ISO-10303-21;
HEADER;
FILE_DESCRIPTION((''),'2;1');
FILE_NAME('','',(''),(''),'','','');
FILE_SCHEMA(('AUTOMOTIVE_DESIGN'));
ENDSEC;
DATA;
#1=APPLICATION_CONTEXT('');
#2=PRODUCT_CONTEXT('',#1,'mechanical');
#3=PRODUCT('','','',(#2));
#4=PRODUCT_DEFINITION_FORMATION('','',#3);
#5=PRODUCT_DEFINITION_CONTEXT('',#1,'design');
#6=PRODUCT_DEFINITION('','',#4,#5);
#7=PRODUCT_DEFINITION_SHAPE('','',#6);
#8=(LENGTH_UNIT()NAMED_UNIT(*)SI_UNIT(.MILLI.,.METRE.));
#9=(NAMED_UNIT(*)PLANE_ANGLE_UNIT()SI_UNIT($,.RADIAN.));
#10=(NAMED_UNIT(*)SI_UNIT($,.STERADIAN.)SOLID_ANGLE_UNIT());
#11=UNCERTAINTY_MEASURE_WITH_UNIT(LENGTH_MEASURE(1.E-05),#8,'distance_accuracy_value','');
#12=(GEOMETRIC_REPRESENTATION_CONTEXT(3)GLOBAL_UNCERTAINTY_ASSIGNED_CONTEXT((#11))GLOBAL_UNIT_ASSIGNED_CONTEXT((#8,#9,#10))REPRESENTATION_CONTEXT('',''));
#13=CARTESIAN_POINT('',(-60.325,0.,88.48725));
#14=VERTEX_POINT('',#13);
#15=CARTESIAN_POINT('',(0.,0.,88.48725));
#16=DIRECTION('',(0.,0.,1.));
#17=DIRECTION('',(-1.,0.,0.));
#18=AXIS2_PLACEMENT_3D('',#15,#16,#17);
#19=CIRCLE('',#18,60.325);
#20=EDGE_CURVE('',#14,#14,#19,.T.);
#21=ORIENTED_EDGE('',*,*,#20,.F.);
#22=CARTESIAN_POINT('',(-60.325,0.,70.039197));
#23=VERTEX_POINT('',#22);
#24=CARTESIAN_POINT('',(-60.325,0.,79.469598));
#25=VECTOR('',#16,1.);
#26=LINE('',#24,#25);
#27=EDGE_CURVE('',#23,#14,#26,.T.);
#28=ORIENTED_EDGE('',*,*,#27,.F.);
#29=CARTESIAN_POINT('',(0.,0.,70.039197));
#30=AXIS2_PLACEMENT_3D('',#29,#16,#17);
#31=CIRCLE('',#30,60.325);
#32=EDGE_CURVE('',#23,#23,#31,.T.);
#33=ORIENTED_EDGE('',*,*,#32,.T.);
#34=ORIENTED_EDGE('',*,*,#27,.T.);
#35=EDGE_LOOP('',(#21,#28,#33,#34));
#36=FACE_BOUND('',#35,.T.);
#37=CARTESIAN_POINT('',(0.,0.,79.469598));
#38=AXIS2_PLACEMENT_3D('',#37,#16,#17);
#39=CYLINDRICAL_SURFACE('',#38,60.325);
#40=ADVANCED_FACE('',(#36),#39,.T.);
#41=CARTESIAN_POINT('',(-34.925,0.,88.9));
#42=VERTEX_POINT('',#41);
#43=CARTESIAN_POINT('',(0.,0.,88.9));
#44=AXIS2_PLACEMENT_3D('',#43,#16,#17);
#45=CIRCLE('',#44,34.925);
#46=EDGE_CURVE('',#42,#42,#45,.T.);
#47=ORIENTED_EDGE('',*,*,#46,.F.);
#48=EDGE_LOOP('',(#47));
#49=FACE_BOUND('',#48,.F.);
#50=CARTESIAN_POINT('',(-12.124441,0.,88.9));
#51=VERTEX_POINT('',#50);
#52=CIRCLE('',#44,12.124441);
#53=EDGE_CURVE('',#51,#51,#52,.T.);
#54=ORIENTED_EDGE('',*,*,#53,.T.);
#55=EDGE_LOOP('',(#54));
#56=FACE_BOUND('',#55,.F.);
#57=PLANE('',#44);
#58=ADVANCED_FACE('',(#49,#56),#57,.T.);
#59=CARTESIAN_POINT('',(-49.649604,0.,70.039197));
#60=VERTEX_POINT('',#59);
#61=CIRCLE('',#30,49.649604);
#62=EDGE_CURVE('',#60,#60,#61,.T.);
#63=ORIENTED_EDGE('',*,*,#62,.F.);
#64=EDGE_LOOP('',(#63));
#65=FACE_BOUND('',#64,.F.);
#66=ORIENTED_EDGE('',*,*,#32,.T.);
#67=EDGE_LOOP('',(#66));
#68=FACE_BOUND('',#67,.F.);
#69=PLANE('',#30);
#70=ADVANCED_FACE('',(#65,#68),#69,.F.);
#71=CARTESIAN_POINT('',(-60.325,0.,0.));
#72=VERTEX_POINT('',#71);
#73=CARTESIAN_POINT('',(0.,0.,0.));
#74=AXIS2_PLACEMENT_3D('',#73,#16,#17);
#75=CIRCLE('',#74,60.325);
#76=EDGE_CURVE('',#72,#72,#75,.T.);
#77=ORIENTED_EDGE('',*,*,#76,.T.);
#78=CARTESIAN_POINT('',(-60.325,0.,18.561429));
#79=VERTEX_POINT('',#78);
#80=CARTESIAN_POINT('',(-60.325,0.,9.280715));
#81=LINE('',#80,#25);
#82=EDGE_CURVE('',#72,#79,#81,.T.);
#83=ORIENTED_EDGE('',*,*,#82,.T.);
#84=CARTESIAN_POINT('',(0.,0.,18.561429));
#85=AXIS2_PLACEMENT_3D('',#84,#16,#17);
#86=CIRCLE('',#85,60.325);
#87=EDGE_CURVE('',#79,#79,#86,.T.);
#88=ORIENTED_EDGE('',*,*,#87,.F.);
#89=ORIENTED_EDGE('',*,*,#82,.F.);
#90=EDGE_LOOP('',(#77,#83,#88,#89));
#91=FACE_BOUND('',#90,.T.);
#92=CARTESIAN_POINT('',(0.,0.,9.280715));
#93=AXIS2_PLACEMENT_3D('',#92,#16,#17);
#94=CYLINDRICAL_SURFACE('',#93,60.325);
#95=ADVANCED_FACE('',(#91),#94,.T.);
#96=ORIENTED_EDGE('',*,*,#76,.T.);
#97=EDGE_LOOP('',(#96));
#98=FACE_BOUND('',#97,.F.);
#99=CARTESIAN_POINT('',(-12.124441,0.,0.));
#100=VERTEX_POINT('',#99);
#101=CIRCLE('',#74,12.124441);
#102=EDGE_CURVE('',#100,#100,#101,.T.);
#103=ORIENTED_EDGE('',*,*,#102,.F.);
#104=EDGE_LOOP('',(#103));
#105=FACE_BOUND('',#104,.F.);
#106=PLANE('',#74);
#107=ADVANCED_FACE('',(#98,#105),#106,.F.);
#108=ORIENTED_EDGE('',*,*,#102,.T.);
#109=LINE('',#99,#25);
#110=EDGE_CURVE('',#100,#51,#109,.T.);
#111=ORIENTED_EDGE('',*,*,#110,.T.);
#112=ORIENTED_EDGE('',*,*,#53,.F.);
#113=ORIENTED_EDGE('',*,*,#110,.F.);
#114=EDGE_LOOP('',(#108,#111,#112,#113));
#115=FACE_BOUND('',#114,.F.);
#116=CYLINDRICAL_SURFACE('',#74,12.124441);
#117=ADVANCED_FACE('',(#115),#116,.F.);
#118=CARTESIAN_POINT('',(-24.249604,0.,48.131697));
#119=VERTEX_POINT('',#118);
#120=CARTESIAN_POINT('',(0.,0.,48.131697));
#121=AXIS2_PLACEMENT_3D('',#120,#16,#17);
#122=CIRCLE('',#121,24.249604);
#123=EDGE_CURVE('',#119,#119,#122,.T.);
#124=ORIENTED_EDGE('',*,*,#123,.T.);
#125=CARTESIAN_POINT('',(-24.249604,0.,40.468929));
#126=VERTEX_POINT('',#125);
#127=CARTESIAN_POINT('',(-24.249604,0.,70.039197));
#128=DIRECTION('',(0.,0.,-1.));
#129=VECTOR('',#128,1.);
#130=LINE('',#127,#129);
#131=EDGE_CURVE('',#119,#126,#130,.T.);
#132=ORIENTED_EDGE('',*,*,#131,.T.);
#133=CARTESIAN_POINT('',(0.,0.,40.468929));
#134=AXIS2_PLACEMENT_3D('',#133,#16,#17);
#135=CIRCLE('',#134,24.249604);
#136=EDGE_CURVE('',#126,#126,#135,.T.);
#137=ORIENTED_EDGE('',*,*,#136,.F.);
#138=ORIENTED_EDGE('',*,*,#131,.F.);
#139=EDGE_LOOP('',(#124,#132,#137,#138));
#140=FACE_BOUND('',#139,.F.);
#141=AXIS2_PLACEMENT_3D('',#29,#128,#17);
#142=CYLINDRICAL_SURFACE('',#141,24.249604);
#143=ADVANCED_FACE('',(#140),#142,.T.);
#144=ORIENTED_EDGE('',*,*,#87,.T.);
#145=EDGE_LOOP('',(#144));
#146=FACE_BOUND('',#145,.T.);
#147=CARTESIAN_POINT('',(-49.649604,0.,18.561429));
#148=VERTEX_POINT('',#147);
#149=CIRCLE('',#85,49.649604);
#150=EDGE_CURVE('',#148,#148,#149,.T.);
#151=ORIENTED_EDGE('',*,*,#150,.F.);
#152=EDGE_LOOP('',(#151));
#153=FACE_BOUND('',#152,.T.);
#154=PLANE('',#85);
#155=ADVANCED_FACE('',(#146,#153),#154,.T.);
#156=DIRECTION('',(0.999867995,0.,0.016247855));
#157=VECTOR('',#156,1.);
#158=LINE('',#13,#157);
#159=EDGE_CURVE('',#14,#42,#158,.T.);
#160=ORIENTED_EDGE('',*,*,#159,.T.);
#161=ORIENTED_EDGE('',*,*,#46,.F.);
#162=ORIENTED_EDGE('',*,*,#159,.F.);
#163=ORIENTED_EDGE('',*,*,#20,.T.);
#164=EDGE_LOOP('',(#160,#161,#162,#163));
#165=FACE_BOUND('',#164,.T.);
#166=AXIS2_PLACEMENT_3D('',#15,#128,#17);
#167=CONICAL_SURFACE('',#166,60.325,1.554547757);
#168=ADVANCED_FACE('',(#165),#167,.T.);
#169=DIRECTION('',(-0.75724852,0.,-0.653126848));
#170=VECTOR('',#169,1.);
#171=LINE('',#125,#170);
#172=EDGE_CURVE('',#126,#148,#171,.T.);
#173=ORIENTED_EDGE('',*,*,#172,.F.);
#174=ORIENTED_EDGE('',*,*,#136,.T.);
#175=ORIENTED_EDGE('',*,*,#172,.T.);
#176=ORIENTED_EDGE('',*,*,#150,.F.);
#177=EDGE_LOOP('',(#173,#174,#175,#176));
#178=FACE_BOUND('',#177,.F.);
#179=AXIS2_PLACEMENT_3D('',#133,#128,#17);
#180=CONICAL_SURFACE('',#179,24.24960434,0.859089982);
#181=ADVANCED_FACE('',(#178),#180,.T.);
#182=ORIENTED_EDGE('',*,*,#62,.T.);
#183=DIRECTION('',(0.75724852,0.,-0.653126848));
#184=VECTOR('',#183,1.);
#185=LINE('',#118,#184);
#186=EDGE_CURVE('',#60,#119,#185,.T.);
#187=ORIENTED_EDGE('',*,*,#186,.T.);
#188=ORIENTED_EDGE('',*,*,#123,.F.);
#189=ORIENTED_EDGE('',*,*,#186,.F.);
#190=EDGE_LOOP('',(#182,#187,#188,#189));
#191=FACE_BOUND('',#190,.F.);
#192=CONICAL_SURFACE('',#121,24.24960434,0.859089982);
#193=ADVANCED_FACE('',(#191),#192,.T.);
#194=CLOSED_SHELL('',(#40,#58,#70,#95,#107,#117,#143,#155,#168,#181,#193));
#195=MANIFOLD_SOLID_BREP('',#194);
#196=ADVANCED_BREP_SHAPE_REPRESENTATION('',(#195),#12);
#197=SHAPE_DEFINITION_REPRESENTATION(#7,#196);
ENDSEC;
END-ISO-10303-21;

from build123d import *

# Parameters (mm, degrees)
F0_W        = 36.0753956601
F0_H        = 18.8608030145
F0_W_2      = 12.1251638026
F0_H_2      = 51.4777676715
F0_H_3      = 18.561429314
F2_C1_SIZE2 = 21.9075
F2_C1_SIZE  = 25.4
F2_C2_SIZE2 = 25.4
F2_C2_SIZE  = 21.9075
F4_SIZE2    = 25.4
F4_SIZE     = 0.41275


# Not quite as in the source:
# - a feature of the source that left no trace in its solid (it failed there, or was rolled back) is left out


with BuildPart() as f1:
    # F0 (on Front) → F1 (revolve)
    with BuildSketch(Plane.XZ):
        with Locations((-42.2873021699, 79.4695984927)):
            Rectangle(F0_W, F0_H)
        with Locations((-18.1870224386, 79.4695984927)):
            Rectangle(F0_W_2, F0_H)
        with Locations((-18.1870224386, 44.3003131497)):
            Rectangle(F0_W_2, F0_H_2)
        with Locations((-18.1870224386, 9.280714657)):
            Rectangle(F0_W_2, F0_H_3)
        with Locations((-42.2873021699, 9.280714657)):
            Rectangle(F0_W, F0_H_3)
    revolve(axis=Axis((0, 0, 53.2892593555), (0, 0, 1)))

    # F2: chamfer of 21.9075 x 25.4 on 2 edges, made by hand

    # F2_c1
    f2_c1_edges = [f1.edges().sort_by_distance(p)[0] for p in [
        (24.2496043399, 0, 70.0391969855),
    ]]
    f2_c1_side = f1.faces().sort_by_distance((24.6877543399, 0, 70.0391969855))[0]
    chamfer(f2_c1_edges, length=F2_C1_SIZE, length2=F2_C1_SIZE2, reference=f2_c1_side)

    # F2_c2
    f2_c2_edges = [f1.edges().sort_by_distance(p)[0] for p in [
        (24.2496043399, 0, 18.561429314),
    ]]
    f2_c2_side = f1.faces().sort_by_distance((24.2496043399, 0, 18.999579314))[0]
    chamfer(f2_c2_edges, length=F2_C2_SIZE, length2=F2_C2_SIZE2, reference=f2_c2_side)

    # F4
    f4_edges = [f1.edges().sort_by_distance(p)[0] for p in [
        (60.325, 0, 88.9),
    ]]
    chamfer(f4_edges, length=F4_SIZE, length2=F4_SIZE2)


solid = f1.part
